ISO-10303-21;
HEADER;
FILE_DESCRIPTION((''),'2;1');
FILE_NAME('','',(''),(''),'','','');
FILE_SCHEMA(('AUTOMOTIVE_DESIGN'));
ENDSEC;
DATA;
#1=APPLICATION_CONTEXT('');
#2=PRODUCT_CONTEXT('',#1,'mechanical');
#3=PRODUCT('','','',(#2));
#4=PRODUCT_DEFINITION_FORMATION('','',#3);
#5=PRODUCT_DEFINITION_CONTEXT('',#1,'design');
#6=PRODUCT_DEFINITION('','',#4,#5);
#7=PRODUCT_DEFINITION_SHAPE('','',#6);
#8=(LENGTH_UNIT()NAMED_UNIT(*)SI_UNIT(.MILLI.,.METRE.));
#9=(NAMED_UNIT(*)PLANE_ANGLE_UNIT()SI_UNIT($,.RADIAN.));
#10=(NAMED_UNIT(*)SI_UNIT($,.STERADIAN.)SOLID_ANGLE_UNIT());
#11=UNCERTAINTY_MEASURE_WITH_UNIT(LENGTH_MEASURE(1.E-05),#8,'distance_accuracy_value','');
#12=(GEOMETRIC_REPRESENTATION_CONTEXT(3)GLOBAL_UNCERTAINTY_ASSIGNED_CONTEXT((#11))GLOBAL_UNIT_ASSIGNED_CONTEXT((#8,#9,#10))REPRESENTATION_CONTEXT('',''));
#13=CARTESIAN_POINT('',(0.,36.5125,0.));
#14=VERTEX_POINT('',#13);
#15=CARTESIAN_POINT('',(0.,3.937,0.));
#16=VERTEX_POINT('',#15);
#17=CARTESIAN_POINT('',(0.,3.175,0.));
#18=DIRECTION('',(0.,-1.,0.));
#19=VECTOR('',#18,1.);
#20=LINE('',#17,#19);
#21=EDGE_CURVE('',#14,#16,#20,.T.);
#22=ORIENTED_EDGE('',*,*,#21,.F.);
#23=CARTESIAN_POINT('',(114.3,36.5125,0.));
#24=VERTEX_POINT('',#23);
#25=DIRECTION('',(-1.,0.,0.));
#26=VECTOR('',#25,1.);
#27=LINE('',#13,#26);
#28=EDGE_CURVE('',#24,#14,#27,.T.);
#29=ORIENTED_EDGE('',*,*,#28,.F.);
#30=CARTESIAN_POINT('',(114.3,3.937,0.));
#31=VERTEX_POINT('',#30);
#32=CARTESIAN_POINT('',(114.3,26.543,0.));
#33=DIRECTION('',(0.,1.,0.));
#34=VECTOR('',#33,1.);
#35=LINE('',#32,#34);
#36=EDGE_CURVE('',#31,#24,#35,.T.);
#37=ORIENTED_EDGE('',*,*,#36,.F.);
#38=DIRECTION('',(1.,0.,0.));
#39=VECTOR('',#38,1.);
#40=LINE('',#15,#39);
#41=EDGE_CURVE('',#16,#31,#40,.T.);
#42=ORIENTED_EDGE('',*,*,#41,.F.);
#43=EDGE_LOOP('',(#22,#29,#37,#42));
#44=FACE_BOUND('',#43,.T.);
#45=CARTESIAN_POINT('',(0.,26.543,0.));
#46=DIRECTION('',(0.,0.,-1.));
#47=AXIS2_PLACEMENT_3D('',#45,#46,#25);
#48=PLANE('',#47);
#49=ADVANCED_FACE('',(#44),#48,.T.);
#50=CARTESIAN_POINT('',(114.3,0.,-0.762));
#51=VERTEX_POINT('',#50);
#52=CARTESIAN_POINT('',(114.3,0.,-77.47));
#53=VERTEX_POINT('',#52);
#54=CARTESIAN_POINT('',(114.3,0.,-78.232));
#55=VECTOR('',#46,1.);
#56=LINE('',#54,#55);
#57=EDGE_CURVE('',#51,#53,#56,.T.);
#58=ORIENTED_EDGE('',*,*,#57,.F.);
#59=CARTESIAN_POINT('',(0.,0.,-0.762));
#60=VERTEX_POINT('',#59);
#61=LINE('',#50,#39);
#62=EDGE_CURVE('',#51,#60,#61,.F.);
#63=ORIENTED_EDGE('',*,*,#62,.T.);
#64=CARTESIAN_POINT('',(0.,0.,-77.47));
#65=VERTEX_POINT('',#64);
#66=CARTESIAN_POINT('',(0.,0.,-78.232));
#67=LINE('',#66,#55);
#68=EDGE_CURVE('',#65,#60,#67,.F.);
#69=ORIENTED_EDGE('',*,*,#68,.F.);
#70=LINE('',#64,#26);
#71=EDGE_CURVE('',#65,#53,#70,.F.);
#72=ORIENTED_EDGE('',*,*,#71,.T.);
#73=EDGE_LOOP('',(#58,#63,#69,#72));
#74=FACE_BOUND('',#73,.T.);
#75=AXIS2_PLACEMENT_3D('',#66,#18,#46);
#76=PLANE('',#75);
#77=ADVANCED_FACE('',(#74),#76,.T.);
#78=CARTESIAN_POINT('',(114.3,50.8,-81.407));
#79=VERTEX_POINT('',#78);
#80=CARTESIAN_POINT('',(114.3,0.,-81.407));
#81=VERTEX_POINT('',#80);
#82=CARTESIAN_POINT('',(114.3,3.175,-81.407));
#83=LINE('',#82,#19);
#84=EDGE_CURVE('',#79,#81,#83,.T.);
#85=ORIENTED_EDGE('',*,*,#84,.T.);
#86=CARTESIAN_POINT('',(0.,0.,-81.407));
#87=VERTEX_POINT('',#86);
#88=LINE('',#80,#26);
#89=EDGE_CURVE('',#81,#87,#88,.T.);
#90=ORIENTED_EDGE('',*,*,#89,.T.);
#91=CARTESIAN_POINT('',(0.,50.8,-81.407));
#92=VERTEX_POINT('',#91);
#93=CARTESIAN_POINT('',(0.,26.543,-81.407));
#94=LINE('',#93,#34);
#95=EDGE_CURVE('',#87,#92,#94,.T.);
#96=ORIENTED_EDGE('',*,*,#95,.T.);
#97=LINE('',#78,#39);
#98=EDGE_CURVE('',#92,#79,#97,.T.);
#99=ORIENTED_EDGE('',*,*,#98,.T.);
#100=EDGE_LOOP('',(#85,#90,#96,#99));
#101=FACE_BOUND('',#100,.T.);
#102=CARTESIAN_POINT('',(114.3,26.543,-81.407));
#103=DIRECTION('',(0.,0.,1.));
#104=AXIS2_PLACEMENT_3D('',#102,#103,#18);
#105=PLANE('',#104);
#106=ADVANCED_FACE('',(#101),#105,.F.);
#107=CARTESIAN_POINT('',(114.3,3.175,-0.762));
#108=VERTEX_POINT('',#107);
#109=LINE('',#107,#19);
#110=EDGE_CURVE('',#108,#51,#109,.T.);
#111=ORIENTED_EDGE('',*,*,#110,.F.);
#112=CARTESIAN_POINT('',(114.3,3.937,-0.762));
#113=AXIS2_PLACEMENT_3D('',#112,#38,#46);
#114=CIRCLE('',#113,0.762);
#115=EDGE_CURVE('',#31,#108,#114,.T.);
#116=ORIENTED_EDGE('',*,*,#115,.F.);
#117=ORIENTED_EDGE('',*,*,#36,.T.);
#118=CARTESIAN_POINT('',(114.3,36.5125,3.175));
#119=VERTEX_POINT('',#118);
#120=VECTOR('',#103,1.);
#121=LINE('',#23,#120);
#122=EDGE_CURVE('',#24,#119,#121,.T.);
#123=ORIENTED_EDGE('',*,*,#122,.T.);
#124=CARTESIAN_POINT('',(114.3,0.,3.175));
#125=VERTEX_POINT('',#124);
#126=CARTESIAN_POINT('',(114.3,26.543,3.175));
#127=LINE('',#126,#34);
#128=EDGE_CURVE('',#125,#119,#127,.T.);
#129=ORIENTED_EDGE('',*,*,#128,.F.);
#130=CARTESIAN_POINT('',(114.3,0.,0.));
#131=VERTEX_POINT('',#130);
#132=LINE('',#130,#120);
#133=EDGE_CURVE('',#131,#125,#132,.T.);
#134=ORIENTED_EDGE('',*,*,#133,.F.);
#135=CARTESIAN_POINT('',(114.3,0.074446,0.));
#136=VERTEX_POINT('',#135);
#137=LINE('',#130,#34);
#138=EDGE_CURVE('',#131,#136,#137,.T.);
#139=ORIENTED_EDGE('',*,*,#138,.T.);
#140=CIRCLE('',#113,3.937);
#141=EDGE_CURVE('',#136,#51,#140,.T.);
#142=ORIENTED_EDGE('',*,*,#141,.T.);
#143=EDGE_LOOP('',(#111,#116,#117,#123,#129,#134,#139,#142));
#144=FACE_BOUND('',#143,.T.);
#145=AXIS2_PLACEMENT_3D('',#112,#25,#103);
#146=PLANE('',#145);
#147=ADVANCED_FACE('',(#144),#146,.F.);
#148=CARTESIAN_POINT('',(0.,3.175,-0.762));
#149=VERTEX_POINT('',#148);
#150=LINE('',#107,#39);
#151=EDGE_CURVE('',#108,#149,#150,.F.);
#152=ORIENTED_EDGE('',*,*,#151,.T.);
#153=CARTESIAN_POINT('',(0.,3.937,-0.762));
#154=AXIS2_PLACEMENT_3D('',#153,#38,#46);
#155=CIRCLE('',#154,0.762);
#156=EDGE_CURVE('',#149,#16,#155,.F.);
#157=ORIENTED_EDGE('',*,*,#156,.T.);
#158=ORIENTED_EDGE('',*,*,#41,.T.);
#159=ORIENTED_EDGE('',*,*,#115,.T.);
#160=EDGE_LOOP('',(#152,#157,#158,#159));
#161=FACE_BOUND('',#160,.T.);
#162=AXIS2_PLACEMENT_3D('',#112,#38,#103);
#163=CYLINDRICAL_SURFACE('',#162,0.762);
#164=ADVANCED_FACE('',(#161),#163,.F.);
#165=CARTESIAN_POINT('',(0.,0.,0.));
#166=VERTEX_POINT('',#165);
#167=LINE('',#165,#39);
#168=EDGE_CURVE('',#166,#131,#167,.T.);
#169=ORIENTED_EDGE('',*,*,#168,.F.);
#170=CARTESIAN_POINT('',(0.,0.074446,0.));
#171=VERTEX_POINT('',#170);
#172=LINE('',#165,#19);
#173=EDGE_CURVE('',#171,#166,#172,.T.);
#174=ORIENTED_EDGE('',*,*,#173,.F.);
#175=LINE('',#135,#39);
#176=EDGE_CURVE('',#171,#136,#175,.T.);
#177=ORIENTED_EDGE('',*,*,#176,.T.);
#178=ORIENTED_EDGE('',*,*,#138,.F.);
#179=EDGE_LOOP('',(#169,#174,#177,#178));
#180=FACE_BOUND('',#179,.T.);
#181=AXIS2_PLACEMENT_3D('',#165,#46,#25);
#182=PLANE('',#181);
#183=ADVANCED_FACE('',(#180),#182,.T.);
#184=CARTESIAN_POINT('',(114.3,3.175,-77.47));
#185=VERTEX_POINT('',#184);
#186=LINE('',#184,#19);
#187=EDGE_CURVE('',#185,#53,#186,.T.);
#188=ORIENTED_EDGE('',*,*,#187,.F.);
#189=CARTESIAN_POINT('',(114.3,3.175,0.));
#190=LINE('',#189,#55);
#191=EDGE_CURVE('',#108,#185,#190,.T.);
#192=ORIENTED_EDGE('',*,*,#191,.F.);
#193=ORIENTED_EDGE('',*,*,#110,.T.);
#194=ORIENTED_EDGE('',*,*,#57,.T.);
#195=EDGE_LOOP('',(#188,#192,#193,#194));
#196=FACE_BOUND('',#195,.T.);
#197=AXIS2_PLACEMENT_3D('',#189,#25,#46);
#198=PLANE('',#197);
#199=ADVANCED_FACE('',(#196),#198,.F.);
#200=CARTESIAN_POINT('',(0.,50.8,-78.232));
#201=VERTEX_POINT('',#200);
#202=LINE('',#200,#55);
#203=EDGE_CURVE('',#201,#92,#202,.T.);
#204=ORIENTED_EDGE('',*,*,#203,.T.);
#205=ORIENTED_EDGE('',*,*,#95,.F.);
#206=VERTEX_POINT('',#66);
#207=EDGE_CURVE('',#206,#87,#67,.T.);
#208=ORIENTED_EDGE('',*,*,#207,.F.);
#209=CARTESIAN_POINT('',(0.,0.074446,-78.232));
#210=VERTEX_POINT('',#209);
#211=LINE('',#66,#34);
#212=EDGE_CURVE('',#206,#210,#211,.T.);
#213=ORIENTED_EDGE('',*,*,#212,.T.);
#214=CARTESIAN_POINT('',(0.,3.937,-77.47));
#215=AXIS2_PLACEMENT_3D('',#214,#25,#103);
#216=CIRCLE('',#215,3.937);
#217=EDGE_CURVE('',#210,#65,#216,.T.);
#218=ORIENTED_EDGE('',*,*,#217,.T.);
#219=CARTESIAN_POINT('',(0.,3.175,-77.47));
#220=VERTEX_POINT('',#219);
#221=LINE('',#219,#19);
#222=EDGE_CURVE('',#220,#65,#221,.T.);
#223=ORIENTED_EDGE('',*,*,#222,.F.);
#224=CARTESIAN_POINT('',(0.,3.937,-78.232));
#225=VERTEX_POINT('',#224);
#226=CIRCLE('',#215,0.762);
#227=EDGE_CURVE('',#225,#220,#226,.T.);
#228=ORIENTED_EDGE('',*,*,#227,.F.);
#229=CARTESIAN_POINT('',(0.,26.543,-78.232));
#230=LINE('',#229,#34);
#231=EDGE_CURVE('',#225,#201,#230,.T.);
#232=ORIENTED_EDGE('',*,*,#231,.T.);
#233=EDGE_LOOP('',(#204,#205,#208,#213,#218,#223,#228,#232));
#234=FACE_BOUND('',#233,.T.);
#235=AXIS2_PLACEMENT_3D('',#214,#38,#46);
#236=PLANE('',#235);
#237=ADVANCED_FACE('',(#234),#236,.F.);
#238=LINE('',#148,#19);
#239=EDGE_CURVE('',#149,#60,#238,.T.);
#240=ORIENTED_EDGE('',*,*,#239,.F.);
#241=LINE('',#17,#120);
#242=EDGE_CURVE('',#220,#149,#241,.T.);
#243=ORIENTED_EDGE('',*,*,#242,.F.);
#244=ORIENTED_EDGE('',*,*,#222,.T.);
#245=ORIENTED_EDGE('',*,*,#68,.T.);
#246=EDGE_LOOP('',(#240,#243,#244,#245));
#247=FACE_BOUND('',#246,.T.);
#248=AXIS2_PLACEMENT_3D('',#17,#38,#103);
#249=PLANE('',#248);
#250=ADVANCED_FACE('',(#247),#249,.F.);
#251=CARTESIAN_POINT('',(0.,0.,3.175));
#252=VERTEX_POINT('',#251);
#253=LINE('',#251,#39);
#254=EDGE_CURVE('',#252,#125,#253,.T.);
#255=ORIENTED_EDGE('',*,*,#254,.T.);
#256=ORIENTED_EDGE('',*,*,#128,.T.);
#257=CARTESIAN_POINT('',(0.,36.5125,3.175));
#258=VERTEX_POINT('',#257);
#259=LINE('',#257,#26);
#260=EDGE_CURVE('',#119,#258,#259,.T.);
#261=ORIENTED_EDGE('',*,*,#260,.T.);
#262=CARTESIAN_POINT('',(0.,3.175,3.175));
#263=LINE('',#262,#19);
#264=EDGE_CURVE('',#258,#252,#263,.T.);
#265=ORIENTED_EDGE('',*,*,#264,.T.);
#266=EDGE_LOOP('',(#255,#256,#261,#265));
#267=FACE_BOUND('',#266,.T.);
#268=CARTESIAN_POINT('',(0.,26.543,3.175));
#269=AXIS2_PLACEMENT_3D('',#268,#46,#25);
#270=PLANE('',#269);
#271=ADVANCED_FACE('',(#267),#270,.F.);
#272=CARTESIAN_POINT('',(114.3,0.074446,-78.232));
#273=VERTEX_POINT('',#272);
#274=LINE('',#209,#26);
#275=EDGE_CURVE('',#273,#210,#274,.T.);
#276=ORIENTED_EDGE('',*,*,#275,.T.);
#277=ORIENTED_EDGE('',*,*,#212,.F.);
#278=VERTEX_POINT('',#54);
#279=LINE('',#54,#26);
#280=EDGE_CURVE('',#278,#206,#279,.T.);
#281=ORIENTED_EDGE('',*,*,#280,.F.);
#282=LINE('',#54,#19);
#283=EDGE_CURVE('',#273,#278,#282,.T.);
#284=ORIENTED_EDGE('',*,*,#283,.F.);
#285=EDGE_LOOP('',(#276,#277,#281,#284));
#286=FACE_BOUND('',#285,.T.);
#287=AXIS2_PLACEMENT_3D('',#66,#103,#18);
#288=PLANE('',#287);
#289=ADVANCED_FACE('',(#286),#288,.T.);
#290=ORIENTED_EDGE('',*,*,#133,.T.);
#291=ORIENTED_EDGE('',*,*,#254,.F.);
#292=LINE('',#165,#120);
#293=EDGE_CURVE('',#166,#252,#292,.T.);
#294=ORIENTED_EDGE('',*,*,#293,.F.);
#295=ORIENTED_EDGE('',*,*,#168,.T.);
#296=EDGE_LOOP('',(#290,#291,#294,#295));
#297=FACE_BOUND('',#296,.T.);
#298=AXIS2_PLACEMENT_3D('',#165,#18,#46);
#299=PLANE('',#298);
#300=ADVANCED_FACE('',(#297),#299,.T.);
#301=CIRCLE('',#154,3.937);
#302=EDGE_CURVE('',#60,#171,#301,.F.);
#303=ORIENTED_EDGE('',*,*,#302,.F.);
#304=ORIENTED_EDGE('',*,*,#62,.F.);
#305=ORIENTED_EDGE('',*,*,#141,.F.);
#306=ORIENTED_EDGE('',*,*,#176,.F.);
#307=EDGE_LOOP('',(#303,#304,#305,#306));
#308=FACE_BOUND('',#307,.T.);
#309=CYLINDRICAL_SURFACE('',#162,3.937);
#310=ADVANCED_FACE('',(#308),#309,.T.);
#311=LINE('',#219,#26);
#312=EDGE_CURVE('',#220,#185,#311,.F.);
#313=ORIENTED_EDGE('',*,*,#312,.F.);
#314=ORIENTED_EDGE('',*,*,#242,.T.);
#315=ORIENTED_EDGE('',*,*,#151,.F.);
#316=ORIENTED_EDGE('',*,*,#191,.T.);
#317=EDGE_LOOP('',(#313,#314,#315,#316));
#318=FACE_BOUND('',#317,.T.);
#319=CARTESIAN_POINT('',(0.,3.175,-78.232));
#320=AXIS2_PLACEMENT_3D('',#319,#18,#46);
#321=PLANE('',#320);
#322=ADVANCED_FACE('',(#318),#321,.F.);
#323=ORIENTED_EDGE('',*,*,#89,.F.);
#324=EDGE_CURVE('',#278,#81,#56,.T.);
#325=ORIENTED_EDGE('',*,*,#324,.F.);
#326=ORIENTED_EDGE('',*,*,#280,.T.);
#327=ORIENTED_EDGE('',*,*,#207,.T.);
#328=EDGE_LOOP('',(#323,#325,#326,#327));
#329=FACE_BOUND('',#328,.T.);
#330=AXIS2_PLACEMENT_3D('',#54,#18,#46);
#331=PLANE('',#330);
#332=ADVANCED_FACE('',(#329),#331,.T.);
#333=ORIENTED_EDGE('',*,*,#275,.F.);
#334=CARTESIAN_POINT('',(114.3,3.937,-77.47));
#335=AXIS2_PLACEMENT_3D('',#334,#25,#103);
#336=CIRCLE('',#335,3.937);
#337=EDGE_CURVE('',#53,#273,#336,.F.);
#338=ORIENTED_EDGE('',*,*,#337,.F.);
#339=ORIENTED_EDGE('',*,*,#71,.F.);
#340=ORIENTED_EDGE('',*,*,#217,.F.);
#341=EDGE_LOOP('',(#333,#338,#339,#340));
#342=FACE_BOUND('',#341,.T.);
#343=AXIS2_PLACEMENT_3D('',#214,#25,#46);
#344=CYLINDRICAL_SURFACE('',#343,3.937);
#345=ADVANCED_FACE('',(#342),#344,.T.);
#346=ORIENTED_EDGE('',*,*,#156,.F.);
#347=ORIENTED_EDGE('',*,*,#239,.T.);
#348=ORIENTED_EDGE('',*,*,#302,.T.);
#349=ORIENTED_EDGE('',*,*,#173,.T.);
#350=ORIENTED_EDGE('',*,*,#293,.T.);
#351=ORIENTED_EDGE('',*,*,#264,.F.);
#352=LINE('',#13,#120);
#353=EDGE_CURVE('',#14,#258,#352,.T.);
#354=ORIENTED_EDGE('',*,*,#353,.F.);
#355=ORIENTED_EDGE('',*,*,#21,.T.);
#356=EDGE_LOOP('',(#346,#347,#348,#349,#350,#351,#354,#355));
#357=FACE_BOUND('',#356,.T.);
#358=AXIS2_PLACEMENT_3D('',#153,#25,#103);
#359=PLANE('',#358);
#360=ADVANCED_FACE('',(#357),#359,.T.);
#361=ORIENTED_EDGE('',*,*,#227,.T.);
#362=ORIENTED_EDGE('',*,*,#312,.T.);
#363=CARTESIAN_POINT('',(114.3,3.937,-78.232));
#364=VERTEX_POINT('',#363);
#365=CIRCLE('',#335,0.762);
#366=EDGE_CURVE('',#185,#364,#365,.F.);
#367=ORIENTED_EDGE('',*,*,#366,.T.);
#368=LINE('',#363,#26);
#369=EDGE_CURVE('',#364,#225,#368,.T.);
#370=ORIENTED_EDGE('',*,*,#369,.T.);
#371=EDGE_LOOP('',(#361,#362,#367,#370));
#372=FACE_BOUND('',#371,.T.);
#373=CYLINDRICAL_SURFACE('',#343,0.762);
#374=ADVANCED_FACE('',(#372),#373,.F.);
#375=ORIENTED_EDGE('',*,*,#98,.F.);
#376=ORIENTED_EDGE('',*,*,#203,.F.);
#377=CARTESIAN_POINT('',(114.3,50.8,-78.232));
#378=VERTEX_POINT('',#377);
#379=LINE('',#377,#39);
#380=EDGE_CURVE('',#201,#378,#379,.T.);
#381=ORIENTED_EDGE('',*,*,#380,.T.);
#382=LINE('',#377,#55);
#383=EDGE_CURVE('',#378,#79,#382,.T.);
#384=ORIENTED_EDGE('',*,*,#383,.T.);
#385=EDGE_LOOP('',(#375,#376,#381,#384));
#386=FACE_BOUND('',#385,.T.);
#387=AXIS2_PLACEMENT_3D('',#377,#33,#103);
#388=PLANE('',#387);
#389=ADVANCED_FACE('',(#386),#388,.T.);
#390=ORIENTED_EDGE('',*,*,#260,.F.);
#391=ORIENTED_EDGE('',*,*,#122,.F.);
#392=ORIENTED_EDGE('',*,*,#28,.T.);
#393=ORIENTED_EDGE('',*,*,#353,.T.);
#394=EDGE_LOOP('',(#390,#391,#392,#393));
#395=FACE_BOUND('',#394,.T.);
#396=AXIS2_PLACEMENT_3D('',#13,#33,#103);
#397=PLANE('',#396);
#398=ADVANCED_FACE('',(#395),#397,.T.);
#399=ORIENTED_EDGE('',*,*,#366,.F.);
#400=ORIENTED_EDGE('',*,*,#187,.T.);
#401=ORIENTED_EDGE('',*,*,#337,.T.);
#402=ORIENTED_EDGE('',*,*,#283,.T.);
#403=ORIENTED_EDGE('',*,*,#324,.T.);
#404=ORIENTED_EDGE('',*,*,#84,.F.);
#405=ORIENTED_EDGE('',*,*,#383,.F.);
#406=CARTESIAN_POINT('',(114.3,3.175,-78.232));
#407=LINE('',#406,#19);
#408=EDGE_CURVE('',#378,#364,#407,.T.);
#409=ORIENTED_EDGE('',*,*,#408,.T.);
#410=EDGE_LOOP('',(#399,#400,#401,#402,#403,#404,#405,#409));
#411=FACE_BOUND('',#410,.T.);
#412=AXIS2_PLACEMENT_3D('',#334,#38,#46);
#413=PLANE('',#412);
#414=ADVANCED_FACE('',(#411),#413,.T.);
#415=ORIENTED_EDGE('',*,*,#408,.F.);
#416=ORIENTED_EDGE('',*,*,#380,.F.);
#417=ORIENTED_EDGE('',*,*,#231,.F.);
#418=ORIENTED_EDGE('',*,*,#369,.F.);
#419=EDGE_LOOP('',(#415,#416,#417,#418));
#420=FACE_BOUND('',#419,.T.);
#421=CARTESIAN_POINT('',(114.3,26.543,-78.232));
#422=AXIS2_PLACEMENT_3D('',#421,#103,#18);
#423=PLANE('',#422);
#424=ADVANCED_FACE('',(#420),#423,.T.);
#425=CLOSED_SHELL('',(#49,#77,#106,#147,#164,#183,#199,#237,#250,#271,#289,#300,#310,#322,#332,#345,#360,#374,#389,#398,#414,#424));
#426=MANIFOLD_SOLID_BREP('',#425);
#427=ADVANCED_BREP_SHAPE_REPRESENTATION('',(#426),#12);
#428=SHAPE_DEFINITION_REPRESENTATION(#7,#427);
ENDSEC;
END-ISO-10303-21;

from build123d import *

# Parameters (mm, degrees)
SKETCH1_W                    = 114.3
SKETCH1_H                    = 78.232
BOSS_EXTRUDE1_DEPTH          = 3.175
EDGE_FLANGE1_STRIP_W         = 14.224
EDGE_FLANGE1_STRIP_H         = 3.175
EDGE_FLANGE1_STRIP_CUT_DEPTH = 114.3
EDGE_FLANGE1_DEPTH           = 114.3
EDGE_FLANGE2_STRIP_W         = 14.224
EDGE_FLANGE2_STRIP_H         = 3.175
EDGE_FLANGE2_STRIP_CUT_DEPTH = 114.3
EDGE_FLANGE2_DEPTH           = 114.3
SKETCH9_R                    = 2.667
CUT_EXTRUDE1_DEPTH           = 145.648316869
CHAMFER1_SIZE                = 3.175
SKETCH15_W                   = 114.3
SKETCH15_H                   = 36.5125
BOSS_EXTRUDE2_DEPTH          = 3.175
SKETCH16_W                   = 114.3
SKETCH16_H                   = 50.8
BOSS_EXTRUDE3_DEPTH          = 3.175


# Sheet-metal steps are written as plain solids
with BuildPart() as part:
    # Sketch1 → Boss-Extrude1 (new body)
    with BuildSketch(Plane(origin=(0, 0, 0), x_dir=(1, 0, 0), z_dir=(0, 1, 0))):
        with Locations((57.15, 39.116)):
            Rectangle(SKETCH1_W, SKETCH1_H)
    extrude(amount=BOSS_EXTRUDE1_DEPTH)

    # Edge-Flange1 strip (across the edge) → Edge-Flange1 strip cut (cut)
    with BuildSketch(Plane(origin=(114.3, 3.175, -78.232), x_dir=(0, 0, 1), z_dir=(-1, 0, 0))):
        with Locations((-6.35, -1.5875)):
            Rectangle(EDGE_FLANGE1_STRIP_W, EDGE_FLANGE1_STRIP_H)
    extrude(amount=EDGE_FLANGE1_STRIP_CUT_DEPTH, mode=Mode.SUBTRACT)

    # Edge-Flange1 section (across the edge) → Edge-Flange1 (add)
    with BuildSketch(Plane(origin=(114.3, 3.175, -78.232), x_dir=(0, 0, 1), z_dir=(-1, 0, 0))):
        with BuildLine():
            Line((-3.175, 0.762), (-3.175, 23.368))
            Line((-3.175, 23.368), (0, 23.368))
            Line((0, 23.368), (0, 0.762))
            ThreePointArc((0, 0.762), (0.223184633, 0.223184633), (0.762, 0))
            Line((0.762, 0), (0.762, -3.175))
            ThreePointArc((0.762, -3.175), (-2.021879398, -2.021879398), (-3.175, 0.762))
        make_face()
    extrude(amount=EDGE_FLANGE1_DEPTH)

    # Edge-Flange2 strip (across the edge) → Edge-Flange2 strip cut (cut)
    with BuildSketch(Plane(origin=(0, 3.175, 0), x_dir=(0, 0, -1), z_dir=(1, 0, 0))):
        with Locations((-6.35, -1.5875)):
            Rectangle(EDGE_FLANGE2_STRIP_W, EDGE_FLANGE2_STRIP_H)
    extrude(amount=EDGE_FLANGE2_STRIP_CUT_DEPTH, mode=Mode.SUBTRACT)

    # Edge-Flange2 section (across the edge) → Edge-Flange2 (add)
    with BuildSketch(Plane(origin=(0, 3.175, 0), x_dir=(0, 0, -1), z_dir=(1, 0, 0))):
        with BuildLine():
            Line((-3.175, 0.762), (-3.175, 23.368))
            Line((-3.175, 23.368), (0, 23.368))
            Line((0, 23.368), (0, 0.762))
            ThreePointArc((0, 0.762), (0.223184633, 0.223184633), (0.762, 0))
            Line((0.762, 0), (0.762, -3.175))
            ThreePointArc((0.762, -3.175), (-2.021879398, -2.021879398), (-3.175, 0.762))
        make_face()
    extrude(amount=EDGE_FLANGE2_DEPTH)

    # Sketch9 → Cut-Extrude1 (cut, through all)
    with BuildSketch(Plane.XY.offset(3.175)):
        with Locations((107.95, 16.637)):
            Circle(SKETCH9_R)
    extrude(amount=-CUT_EXTRUDE1_DEPTH, mode=Mode.SUBTRACT)

    # Chamfer1
    chamfer1_edges = [part.edges().sort_by_distance(p)[0] for p in [
        (114.3, 26.543, -79.8195),
        (0, 26.543, -79.8195),
        (0, 26.543, 1.5875),
        (114.3, 26.543, 1.5875),
    ]]
    chamfer(chamfer1_edges, length=CHAMFER1_SIZE)

    # Sketch15 → Boss-Extrude2 (add)
    with BuildSketch(Plane.XY.offset(3.175)):
        with Locations((57.15, 18.25625)):
            Rectangle(SKETCH15_W, SKETCH15_H)
    extrude(amount=-BOSS_EXTRUDE2_DEPTH)

    # Sketch16 → Boss-Extrude3 (add)
    with BuildSketch(Plane(origin=(0, 0, -81.407), x_dir=(-1, 0, 0), z_dir=(0, 0, -1))):
        with Locations((-57.15, 25.4)):
            Rectangle(SKETCH16_W, SKETCH16_H)
    extrude(amount=-BOSS_EXTRUDE3_DEPTH)


solid = part.part
